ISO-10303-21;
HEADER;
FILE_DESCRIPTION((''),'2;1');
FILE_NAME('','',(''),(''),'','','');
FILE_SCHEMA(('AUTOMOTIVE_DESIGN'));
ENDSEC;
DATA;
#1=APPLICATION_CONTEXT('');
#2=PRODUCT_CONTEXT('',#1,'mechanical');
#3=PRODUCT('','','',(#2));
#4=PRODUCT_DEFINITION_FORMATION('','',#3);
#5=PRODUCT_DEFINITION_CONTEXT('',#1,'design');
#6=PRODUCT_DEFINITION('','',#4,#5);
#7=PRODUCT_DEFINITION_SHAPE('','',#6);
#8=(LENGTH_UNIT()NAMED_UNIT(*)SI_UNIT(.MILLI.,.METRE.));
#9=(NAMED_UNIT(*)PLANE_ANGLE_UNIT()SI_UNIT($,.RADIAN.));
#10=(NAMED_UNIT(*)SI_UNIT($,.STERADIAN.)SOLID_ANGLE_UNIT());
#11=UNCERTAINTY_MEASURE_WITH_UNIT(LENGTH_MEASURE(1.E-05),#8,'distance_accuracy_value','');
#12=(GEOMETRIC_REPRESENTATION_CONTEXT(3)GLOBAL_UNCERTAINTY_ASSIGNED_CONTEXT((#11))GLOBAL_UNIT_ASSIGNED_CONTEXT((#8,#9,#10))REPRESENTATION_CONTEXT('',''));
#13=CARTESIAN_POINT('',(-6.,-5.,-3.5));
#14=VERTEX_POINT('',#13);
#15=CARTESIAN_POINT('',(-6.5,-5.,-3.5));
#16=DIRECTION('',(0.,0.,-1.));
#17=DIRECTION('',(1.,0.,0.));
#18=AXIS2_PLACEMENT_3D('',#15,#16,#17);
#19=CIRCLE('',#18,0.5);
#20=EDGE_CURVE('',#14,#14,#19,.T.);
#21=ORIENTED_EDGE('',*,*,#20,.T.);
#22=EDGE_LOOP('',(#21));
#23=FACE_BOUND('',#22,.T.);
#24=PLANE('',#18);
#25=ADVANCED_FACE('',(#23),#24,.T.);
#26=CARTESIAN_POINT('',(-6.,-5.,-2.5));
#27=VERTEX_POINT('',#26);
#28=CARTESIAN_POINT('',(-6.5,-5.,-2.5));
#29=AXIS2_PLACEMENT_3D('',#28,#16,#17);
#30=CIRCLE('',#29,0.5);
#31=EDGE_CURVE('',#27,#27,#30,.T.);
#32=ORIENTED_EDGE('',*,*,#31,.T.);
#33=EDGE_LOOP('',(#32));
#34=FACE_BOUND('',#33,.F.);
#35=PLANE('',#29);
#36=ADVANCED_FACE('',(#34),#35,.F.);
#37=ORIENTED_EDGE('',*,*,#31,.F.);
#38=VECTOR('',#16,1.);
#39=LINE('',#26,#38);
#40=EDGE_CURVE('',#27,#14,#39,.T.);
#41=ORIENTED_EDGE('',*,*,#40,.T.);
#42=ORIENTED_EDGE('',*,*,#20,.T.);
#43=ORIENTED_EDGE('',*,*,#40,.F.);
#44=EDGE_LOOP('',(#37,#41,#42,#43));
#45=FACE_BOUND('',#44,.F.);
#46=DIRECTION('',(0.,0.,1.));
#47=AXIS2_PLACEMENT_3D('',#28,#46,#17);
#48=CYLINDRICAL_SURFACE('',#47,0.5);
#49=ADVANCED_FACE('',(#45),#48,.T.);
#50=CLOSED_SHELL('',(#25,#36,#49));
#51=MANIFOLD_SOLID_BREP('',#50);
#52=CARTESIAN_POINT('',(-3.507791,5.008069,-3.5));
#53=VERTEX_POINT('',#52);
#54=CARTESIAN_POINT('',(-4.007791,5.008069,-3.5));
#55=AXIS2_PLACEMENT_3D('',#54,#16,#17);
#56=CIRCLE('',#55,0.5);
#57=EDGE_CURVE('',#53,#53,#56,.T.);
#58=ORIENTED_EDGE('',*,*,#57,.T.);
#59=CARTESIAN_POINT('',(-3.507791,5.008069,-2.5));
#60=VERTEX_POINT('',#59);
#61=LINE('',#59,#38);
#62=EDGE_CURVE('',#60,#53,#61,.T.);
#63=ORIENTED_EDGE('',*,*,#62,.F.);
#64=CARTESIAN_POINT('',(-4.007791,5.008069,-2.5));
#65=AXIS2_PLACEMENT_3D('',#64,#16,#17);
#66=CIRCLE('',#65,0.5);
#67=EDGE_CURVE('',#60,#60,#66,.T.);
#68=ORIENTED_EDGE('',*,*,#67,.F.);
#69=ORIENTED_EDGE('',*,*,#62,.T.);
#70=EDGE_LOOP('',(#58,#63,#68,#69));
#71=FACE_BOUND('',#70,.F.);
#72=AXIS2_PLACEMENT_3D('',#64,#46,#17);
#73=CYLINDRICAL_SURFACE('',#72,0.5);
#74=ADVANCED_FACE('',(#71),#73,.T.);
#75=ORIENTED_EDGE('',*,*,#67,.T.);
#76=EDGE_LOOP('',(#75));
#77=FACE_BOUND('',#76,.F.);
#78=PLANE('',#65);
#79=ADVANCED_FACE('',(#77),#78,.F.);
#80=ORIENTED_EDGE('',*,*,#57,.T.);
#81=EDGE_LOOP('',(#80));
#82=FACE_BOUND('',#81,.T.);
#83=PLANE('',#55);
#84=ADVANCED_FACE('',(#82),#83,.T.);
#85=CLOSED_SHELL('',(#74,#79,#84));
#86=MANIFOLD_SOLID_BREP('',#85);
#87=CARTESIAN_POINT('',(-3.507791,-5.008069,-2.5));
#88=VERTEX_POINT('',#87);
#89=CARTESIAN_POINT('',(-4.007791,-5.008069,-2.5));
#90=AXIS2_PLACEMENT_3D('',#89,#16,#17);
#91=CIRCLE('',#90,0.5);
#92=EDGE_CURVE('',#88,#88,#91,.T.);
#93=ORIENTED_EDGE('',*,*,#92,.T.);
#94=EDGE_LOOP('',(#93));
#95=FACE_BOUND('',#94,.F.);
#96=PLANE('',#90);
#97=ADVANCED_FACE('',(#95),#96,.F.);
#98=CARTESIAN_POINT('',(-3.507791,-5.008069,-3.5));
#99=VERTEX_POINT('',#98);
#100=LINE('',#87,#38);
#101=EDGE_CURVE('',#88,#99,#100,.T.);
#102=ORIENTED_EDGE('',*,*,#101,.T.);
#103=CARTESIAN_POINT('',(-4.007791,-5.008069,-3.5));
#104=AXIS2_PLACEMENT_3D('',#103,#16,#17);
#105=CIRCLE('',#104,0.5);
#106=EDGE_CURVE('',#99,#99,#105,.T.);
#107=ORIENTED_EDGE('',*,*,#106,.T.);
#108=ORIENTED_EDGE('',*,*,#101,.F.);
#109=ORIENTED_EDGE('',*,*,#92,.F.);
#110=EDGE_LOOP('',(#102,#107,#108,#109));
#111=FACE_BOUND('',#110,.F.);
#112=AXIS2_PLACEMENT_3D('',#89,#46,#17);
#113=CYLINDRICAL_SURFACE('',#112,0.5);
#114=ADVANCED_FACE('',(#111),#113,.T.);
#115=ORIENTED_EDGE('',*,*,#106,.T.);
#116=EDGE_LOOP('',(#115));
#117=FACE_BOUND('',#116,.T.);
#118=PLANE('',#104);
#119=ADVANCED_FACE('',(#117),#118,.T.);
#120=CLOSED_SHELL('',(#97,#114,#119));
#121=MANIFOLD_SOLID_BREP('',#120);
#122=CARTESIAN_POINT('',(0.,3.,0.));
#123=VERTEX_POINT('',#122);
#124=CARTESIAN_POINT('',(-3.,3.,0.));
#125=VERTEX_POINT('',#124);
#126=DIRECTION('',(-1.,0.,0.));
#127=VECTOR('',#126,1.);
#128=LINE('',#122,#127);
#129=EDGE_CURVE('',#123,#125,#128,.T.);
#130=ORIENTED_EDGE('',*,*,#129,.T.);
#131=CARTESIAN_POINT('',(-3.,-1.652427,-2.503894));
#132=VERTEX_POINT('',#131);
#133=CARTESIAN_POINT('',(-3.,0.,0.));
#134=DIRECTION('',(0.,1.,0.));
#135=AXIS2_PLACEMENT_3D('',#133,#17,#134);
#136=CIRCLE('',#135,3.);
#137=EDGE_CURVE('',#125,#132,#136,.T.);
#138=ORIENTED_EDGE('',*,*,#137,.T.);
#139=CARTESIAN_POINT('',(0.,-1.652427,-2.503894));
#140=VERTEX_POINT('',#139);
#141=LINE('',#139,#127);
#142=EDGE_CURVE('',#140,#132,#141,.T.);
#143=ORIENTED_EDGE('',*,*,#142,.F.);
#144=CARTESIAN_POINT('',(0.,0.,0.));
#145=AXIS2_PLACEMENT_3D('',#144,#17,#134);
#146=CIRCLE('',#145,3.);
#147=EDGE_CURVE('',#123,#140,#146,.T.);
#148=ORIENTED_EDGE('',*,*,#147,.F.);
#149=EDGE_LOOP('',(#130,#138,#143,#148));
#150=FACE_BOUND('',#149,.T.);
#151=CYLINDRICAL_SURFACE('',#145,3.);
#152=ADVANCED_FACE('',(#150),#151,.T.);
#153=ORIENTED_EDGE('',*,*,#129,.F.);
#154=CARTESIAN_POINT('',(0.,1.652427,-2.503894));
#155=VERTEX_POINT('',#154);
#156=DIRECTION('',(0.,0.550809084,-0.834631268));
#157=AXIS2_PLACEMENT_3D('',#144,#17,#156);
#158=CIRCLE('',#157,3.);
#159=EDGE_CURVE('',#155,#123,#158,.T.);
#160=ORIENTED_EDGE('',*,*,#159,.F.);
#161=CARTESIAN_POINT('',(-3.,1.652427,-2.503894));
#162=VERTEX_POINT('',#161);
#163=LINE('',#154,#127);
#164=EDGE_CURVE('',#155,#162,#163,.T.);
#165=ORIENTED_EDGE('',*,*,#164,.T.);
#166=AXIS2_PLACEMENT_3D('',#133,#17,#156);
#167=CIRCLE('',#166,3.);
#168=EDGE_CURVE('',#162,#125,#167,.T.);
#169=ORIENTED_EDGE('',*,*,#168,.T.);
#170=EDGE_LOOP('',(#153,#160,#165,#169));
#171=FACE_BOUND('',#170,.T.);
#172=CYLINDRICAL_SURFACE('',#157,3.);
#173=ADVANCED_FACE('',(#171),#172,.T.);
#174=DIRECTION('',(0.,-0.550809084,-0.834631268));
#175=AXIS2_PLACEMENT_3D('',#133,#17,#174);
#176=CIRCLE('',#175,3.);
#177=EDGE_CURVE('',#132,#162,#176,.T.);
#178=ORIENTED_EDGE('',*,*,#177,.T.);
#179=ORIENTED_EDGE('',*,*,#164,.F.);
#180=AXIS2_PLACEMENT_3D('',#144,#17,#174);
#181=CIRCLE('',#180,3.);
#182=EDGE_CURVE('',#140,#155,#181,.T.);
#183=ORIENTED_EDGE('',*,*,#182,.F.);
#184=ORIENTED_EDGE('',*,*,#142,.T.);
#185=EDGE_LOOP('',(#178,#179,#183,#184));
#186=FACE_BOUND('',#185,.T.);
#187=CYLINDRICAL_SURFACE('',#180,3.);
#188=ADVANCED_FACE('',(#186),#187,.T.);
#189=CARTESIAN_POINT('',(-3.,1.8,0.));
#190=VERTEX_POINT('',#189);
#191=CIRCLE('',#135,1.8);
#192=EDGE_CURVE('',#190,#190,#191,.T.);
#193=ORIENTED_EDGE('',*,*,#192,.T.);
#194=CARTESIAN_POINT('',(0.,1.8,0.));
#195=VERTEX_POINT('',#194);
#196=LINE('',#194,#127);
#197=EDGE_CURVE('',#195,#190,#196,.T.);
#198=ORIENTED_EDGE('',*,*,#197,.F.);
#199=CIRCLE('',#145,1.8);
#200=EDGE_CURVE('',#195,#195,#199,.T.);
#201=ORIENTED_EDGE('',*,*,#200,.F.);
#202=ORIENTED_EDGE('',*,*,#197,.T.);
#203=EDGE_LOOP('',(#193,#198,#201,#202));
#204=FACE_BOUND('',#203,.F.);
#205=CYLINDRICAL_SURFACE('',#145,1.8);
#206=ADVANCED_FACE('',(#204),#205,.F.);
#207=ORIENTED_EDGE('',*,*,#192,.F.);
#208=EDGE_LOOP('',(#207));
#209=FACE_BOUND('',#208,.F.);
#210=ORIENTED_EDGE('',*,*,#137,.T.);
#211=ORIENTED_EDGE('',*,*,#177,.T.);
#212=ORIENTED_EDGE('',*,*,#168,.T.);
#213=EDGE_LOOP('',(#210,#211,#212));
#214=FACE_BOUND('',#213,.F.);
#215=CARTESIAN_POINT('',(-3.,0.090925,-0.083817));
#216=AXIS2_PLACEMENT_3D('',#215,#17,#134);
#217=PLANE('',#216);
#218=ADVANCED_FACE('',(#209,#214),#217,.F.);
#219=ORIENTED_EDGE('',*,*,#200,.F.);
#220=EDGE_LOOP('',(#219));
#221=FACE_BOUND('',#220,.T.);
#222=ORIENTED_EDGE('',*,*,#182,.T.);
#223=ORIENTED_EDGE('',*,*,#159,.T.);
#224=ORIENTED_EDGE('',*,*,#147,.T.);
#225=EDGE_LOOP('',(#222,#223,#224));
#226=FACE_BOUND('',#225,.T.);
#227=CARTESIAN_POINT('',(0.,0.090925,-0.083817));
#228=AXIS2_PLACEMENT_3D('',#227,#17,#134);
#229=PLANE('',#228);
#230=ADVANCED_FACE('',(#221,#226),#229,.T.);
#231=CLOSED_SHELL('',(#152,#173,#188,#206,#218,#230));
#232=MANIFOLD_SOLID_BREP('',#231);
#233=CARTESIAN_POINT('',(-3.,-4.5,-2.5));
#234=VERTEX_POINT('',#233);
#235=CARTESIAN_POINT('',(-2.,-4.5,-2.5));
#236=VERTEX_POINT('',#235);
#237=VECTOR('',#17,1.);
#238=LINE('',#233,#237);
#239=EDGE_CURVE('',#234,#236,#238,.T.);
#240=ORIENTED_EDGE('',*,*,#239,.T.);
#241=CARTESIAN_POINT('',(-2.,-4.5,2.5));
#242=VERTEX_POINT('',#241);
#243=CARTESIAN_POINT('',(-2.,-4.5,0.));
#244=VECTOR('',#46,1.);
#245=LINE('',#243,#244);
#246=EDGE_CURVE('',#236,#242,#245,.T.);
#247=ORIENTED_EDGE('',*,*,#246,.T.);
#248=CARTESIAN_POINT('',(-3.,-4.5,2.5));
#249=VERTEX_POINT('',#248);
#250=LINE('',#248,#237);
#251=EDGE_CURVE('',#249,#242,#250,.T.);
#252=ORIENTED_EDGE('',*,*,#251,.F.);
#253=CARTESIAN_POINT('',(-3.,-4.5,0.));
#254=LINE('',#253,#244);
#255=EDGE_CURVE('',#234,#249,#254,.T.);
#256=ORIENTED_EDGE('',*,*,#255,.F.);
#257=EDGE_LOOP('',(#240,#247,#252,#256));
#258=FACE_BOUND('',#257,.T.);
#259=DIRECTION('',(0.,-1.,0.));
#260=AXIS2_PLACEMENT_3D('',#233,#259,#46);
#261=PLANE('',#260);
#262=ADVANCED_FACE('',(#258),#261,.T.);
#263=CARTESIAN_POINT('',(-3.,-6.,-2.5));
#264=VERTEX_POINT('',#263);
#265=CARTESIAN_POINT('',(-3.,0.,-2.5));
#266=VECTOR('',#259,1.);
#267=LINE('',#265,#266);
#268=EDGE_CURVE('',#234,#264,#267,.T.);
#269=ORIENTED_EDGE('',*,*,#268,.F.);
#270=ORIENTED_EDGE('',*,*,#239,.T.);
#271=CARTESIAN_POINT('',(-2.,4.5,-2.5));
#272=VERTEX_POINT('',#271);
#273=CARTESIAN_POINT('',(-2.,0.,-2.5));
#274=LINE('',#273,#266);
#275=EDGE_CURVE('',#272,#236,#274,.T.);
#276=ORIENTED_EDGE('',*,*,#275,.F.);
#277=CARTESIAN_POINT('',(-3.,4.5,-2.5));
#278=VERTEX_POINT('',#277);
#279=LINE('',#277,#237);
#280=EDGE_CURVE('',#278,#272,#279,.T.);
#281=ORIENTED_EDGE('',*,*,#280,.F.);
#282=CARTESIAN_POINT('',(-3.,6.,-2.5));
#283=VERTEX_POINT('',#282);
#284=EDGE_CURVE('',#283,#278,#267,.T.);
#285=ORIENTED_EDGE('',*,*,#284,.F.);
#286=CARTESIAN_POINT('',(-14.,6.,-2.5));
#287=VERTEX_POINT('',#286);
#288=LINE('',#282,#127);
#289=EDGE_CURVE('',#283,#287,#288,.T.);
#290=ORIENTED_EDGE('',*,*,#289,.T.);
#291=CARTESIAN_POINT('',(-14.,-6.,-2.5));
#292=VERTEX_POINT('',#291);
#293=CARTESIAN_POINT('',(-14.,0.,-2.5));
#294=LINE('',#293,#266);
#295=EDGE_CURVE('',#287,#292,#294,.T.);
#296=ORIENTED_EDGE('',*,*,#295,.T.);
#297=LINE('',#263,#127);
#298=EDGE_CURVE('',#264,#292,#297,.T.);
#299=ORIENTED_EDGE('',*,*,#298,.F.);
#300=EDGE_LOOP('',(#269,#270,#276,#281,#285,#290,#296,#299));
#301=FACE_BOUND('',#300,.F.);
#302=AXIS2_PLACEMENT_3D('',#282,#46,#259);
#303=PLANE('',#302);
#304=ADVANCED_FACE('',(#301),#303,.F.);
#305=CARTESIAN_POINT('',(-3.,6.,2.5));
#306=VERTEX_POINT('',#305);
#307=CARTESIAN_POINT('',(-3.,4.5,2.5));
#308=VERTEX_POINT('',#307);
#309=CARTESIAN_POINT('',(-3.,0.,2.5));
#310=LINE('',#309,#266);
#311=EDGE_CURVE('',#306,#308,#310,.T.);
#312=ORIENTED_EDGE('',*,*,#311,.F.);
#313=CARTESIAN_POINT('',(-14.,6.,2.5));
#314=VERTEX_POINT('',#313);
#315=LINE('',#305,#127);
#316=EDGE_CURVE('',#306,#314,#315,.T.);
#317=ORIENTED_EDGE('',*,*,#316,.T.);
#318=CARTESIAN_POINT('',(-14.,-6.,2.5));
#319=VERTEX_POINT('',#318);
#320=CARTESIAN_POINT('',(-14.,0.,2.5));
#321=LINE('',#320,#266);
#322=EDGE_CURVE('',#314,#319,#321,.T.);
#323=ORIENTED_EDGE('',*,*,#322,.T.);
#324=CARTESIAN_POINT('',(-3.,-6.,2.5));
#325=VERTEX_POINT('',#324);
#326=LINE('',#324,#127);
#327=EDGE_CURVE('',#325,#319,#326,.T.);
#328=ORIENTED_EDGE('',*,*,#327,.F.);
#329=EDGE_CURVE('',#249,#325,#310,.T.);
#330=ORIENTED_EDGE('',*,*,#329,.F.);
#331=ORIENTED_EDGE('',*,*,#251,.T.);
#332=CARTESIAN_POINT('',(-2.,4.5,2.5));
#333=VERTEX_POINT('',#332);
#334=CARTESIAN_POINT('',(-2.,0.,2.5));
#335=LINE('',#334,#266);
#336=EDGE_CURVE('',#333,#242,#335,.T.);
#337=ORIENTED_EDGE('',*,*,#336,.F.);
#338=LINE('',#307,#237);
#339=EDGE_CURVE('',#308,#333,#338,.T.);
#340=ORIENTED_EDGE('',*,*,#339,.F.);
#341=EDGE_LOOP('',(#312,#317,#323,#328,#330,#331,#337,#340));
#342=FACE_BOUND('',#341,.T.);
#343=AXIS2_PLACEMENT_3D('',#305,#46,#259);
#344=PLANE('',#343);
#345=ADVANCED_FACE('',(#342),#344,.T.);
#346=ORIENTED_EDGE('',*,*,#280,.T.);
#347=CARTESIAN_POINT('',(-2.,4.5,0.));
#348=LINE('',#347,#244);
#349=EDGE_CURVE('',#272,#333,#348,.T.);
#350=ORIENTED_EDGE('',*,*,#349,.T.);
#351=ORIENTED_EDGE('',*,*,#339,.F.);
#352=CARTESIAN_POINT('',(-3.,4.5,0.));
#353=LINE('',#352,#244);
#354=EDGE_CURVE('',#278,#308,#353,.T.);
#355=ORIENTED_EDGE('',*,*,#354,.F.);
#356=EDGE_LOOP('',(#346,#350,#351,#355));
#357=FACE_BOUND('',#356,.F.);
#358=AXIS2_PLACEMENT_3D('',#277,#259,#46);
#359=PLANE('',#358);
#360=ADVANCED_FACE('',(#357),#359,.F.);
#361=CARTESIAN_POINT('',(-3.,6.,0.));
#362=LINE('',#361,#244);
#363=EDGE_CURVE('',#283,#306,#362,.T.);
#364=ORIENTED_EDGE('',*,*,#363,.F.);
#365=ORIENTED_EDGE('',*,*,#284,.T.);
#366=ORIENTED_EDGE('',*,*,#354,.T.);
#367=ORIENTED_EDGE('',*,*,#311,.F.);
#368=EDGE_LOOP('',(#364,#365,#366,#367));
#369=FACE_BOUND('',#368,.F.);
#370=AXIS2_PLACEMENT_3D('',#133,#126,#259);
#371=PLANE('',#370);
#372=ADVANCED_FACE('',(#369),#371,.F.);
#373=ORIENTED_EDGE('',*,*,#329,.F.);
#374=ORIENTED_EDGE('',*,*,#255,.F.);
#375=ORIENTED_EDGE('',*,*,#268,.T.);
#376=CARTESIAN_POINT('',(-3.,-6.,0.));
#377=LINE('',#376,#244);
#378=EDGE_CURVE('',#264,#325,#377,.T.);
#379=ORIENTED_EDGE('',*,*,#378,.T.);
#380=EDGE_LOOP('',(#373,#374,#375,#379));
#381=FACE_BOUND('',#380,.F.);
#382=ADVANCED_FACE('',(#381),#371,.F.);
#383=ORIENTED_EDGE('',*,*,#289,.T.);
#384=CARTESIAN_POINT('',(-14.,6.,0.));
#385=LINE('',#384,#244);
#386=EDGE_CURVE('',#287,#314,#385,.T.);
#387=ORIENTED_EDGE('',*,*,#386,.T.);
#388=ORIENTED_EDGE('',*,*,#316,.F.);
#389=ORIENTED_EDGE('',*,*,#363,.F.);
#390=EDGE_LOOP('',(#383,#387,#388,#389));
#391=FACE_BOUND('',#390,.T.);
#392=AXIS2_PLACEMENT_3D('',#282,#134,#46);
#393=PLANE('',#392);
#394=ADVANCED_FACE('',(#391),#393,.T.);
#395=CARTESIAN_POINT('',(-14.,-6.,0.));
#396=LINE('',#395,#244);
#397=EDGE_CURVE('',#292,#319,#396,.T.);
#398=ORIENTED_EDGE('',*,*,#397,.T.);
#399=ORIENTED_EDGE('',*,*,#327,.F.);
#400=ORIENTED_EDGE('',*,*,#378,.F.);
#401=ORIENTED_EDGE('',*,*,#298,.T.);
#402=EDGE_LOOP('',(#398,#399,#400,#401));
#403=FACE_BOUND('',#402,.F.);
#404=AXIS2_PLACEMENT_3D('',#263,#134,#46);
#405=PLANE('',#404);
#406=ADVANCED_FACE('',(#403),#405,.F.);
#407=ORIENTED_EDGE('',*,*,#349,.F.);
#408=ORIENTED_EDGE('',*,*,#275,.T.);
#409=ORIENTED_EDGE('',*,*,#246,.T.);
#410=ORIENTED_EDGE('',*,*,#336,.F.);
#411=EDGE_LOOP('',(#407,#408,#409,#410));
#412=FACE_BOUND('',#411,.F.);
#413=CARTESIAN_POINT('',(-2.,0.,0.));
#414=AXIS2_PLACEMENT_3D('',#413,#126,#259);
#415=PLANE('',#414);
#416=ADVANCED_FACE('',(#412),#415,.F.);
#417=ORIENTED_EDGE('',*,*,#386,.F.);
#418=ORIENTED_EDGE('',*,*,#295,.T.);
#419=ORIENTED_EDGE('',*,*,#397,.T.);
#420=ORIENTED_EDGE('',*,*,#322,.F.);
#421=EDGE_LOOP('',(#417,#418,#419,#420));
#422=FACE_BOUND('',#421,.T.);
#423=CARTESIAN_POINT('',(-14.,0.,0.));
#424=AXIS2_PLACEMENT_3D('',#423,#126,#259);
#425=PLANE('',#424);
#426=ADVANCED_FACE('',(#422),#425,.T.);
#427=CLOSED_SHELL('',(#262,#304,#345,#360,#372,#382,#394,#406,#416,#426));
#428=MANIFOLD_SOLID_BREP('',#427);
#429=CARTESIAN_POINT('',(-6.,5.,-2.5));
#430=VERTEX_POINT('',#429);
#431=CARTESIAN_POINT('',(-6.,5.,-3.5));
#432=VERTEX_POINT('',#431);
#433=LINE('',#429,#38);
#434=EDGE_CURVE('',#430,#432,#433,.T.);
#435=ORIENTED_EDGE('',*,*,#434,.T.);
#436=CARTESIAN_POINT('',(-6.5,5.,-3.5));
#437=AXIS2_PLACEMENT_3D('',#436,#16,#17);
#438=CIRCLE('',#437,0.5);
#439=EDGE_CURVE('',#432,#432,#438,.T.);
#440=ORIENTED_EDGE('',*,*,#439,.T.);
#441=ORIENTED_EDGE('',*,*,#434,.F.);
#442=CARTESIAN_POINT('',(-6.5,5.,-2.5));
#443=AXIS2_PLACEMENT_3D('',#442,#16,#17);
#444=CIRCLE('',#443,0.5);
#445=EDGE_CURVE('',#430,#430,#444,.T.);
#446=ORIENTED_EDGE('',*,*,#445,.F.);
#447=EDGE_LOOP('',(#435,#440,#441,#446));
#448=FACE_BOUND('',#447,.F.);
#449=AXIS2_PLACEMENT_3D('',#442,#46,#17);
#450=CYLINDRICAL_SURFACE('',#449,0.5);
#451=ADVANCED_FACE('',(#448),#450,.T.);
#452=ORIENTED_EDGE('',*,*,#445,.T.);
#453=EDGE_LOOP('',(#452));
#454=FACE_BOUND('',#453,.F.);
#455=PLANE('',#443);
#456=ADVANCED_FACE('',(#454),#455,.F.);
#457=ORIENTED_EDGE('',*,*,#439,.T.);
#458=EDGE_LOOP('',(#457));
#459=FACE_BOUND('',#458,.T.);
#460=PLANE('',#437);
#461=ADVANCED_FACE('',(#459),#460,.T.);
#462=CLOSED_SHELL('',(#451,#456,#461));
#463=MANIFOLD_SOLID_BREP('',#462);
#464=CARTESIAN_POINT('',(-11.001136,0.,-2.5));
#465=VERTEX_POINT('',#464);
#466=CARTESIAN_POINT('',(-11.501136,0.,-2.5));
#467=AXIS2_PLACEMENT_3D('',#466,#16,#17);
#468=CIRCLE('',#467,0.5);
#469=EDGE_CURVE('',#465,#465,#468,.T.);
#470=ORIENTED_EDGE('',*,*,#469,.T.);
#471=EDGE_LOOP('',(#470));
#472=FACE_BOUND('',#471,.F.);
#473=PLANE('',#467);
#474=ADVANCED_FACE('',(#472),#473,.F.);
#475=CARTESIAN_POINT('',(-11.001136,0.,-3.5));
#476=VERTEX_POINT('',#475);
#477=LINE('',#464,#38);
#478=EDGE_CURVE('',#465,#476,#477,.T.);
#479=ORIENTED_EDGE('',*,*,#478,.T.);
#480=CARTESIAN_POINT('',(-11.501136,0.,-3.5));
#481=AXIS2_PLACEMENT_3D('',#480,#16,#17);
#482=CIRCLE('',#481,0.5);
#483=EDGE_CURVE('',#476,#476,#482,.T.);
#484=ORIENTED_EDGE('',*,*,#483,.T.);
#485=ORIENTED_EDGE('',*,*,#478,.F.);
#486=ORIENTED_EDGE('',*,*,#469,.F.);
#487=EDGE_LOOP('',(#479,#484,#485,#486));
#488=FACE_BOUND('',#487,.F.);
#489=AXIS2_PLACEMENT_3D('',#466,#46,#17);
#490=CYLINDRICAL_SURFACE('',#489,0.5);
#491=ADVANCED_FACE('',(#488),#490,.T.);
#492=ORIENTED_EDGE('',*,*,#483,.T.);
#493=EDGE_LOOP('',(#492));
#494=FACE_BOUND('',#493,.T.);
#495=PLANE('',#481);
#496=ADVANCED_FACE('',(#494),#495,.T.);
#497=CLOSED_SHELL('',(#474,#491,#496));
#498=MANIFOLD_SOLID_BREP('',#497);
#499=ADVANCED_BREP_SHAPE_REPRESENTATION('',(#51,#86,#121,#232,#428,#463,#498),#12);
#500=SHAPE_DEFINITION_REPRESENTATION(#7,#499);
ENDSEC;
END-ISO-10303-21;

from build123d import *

# Parameters (mm, degrees)
F0_R     = 1.8
F1_DEPTH = 3
F2_W     = 9
F2_H     = 5
F3_DEPTH = 1
F4_W     = 12
F4_H     = 5
F5_DEPTH = 11
F6_R     = 0.5
F7_DEPTH = 1


# Not quite as in the source:
# - a feature names something its author has since deleted; it is built from what else it names


with BuildPart() as f1:
    # F0 (on Right) → F1 (new body)
    with BuildSketch(Plane.YZ):
        with BuildLine():
            ThreePointArc((1.6524272508, -2.5038938038), (2.6417117322, -1.421745098), (3, 0))
            ThreePointArc((3, 0), (-1.421745098, 2.6417117322), (-1.6524272508, -2.5038938038))
            Line((-1.6524272508, -2.5038938038), (1.6524272508, -2.5038938038))
        make_face()
        Circle(F0_R, mode=Mode.SUBTRACT)
        with BuildLine():
            Line((1.6524272508, -2.5038938038), (-1.6524272508, -2.5038938038))
            ThreePointArc((-1.6524272508, -2.5038938038), (0, -3), (1.6524272508, -2.5038938038))
        make_face()
    extrude(amount=-F1_DEPTH)


with BuildPart() as f3:
    # F2 (on face) → F3 (new body)
    with BuildSketch(Plane(origin=(-3, 0, 0), x_dir=(0, -1, 0), z_dir=(-1, 0, 0))):
        Rectangle(F2_W, F2_H)
    extrude(amount=-F3_DEPTH)

    # F4 (on face) → F5 (join)
    with BuildSketch(Plane(origin=(-3, 0, 0), x_dir=(0, -1, 0), z_dir=(-1, 0, 0))):
        Rectangle(F4_W, F4_H)
    extrude(amount=F5_DEPTH)


with BuildPart() as f7:
    # F6 (on face) → F7 (new body)
    with BuildSketch(Plane(origin=(0, 0, -2.5), x_dir=(1, 0, 0), z_dir=(0, 0, -1))):
        with Locations((-4.0077906769, 5.0080687183)):
            Circle(F6_R)
    extrude(amount=F7_DEPTH)


with BuildPart() as f7b:
    # F6 (on face) → F7, piece 2 (new body)
    with BuildSketch(Plane(origin=(0, 0, -2.5), x_dir=(1, 0, 0), z_dir=(0, 0, -1))):
        with Locations((-11.5011356074, 0)):
            Circle(F6_R)
    extrude(amount=F7_DEPTH)


with BuildPart() as f7c:
    # F6 (on face) → F7, piece 3 (new body)
    with BuildSketch(Plane(origin=(0, 0, -2.5), x_dir=(1, 0, 0), z_dir=(0, 0, -1))):
        with Locations((-6.5, -5)):
            Circle(F6_R)
    extrude(amount=F7_DEPTH)


with BuildPart() as f7d:
    # F6 (on face) → F7, piece 4 (new body)
    with BuildSketch(Plane(origin=(0, 0, -2.5), x_dir=(1, 0, 0), z_dir=(0, 0, -1))):
        with Locations((-6.5, 5)):
            Circle(F6_R)
    extrude(amount=F7_DEPTH)


with BuildPart() as f7e:
    # F6 (on face) → F7, piece 5 (new body)
    with BuildSketch(Plane(origin=(0, 0, -2.5), x_dir=(1, 0, 0), z_dir=(0, 0, -1))):
        with Locations((-4.0077906769, -5.0080687183)):
            Circle(F6_R)
    extrude(amount=F7_DEPTH)


solid = Compound([f1.part, f3.part, f7.part, f7b.part, f7c.part, f7d.part, f7e.part])
